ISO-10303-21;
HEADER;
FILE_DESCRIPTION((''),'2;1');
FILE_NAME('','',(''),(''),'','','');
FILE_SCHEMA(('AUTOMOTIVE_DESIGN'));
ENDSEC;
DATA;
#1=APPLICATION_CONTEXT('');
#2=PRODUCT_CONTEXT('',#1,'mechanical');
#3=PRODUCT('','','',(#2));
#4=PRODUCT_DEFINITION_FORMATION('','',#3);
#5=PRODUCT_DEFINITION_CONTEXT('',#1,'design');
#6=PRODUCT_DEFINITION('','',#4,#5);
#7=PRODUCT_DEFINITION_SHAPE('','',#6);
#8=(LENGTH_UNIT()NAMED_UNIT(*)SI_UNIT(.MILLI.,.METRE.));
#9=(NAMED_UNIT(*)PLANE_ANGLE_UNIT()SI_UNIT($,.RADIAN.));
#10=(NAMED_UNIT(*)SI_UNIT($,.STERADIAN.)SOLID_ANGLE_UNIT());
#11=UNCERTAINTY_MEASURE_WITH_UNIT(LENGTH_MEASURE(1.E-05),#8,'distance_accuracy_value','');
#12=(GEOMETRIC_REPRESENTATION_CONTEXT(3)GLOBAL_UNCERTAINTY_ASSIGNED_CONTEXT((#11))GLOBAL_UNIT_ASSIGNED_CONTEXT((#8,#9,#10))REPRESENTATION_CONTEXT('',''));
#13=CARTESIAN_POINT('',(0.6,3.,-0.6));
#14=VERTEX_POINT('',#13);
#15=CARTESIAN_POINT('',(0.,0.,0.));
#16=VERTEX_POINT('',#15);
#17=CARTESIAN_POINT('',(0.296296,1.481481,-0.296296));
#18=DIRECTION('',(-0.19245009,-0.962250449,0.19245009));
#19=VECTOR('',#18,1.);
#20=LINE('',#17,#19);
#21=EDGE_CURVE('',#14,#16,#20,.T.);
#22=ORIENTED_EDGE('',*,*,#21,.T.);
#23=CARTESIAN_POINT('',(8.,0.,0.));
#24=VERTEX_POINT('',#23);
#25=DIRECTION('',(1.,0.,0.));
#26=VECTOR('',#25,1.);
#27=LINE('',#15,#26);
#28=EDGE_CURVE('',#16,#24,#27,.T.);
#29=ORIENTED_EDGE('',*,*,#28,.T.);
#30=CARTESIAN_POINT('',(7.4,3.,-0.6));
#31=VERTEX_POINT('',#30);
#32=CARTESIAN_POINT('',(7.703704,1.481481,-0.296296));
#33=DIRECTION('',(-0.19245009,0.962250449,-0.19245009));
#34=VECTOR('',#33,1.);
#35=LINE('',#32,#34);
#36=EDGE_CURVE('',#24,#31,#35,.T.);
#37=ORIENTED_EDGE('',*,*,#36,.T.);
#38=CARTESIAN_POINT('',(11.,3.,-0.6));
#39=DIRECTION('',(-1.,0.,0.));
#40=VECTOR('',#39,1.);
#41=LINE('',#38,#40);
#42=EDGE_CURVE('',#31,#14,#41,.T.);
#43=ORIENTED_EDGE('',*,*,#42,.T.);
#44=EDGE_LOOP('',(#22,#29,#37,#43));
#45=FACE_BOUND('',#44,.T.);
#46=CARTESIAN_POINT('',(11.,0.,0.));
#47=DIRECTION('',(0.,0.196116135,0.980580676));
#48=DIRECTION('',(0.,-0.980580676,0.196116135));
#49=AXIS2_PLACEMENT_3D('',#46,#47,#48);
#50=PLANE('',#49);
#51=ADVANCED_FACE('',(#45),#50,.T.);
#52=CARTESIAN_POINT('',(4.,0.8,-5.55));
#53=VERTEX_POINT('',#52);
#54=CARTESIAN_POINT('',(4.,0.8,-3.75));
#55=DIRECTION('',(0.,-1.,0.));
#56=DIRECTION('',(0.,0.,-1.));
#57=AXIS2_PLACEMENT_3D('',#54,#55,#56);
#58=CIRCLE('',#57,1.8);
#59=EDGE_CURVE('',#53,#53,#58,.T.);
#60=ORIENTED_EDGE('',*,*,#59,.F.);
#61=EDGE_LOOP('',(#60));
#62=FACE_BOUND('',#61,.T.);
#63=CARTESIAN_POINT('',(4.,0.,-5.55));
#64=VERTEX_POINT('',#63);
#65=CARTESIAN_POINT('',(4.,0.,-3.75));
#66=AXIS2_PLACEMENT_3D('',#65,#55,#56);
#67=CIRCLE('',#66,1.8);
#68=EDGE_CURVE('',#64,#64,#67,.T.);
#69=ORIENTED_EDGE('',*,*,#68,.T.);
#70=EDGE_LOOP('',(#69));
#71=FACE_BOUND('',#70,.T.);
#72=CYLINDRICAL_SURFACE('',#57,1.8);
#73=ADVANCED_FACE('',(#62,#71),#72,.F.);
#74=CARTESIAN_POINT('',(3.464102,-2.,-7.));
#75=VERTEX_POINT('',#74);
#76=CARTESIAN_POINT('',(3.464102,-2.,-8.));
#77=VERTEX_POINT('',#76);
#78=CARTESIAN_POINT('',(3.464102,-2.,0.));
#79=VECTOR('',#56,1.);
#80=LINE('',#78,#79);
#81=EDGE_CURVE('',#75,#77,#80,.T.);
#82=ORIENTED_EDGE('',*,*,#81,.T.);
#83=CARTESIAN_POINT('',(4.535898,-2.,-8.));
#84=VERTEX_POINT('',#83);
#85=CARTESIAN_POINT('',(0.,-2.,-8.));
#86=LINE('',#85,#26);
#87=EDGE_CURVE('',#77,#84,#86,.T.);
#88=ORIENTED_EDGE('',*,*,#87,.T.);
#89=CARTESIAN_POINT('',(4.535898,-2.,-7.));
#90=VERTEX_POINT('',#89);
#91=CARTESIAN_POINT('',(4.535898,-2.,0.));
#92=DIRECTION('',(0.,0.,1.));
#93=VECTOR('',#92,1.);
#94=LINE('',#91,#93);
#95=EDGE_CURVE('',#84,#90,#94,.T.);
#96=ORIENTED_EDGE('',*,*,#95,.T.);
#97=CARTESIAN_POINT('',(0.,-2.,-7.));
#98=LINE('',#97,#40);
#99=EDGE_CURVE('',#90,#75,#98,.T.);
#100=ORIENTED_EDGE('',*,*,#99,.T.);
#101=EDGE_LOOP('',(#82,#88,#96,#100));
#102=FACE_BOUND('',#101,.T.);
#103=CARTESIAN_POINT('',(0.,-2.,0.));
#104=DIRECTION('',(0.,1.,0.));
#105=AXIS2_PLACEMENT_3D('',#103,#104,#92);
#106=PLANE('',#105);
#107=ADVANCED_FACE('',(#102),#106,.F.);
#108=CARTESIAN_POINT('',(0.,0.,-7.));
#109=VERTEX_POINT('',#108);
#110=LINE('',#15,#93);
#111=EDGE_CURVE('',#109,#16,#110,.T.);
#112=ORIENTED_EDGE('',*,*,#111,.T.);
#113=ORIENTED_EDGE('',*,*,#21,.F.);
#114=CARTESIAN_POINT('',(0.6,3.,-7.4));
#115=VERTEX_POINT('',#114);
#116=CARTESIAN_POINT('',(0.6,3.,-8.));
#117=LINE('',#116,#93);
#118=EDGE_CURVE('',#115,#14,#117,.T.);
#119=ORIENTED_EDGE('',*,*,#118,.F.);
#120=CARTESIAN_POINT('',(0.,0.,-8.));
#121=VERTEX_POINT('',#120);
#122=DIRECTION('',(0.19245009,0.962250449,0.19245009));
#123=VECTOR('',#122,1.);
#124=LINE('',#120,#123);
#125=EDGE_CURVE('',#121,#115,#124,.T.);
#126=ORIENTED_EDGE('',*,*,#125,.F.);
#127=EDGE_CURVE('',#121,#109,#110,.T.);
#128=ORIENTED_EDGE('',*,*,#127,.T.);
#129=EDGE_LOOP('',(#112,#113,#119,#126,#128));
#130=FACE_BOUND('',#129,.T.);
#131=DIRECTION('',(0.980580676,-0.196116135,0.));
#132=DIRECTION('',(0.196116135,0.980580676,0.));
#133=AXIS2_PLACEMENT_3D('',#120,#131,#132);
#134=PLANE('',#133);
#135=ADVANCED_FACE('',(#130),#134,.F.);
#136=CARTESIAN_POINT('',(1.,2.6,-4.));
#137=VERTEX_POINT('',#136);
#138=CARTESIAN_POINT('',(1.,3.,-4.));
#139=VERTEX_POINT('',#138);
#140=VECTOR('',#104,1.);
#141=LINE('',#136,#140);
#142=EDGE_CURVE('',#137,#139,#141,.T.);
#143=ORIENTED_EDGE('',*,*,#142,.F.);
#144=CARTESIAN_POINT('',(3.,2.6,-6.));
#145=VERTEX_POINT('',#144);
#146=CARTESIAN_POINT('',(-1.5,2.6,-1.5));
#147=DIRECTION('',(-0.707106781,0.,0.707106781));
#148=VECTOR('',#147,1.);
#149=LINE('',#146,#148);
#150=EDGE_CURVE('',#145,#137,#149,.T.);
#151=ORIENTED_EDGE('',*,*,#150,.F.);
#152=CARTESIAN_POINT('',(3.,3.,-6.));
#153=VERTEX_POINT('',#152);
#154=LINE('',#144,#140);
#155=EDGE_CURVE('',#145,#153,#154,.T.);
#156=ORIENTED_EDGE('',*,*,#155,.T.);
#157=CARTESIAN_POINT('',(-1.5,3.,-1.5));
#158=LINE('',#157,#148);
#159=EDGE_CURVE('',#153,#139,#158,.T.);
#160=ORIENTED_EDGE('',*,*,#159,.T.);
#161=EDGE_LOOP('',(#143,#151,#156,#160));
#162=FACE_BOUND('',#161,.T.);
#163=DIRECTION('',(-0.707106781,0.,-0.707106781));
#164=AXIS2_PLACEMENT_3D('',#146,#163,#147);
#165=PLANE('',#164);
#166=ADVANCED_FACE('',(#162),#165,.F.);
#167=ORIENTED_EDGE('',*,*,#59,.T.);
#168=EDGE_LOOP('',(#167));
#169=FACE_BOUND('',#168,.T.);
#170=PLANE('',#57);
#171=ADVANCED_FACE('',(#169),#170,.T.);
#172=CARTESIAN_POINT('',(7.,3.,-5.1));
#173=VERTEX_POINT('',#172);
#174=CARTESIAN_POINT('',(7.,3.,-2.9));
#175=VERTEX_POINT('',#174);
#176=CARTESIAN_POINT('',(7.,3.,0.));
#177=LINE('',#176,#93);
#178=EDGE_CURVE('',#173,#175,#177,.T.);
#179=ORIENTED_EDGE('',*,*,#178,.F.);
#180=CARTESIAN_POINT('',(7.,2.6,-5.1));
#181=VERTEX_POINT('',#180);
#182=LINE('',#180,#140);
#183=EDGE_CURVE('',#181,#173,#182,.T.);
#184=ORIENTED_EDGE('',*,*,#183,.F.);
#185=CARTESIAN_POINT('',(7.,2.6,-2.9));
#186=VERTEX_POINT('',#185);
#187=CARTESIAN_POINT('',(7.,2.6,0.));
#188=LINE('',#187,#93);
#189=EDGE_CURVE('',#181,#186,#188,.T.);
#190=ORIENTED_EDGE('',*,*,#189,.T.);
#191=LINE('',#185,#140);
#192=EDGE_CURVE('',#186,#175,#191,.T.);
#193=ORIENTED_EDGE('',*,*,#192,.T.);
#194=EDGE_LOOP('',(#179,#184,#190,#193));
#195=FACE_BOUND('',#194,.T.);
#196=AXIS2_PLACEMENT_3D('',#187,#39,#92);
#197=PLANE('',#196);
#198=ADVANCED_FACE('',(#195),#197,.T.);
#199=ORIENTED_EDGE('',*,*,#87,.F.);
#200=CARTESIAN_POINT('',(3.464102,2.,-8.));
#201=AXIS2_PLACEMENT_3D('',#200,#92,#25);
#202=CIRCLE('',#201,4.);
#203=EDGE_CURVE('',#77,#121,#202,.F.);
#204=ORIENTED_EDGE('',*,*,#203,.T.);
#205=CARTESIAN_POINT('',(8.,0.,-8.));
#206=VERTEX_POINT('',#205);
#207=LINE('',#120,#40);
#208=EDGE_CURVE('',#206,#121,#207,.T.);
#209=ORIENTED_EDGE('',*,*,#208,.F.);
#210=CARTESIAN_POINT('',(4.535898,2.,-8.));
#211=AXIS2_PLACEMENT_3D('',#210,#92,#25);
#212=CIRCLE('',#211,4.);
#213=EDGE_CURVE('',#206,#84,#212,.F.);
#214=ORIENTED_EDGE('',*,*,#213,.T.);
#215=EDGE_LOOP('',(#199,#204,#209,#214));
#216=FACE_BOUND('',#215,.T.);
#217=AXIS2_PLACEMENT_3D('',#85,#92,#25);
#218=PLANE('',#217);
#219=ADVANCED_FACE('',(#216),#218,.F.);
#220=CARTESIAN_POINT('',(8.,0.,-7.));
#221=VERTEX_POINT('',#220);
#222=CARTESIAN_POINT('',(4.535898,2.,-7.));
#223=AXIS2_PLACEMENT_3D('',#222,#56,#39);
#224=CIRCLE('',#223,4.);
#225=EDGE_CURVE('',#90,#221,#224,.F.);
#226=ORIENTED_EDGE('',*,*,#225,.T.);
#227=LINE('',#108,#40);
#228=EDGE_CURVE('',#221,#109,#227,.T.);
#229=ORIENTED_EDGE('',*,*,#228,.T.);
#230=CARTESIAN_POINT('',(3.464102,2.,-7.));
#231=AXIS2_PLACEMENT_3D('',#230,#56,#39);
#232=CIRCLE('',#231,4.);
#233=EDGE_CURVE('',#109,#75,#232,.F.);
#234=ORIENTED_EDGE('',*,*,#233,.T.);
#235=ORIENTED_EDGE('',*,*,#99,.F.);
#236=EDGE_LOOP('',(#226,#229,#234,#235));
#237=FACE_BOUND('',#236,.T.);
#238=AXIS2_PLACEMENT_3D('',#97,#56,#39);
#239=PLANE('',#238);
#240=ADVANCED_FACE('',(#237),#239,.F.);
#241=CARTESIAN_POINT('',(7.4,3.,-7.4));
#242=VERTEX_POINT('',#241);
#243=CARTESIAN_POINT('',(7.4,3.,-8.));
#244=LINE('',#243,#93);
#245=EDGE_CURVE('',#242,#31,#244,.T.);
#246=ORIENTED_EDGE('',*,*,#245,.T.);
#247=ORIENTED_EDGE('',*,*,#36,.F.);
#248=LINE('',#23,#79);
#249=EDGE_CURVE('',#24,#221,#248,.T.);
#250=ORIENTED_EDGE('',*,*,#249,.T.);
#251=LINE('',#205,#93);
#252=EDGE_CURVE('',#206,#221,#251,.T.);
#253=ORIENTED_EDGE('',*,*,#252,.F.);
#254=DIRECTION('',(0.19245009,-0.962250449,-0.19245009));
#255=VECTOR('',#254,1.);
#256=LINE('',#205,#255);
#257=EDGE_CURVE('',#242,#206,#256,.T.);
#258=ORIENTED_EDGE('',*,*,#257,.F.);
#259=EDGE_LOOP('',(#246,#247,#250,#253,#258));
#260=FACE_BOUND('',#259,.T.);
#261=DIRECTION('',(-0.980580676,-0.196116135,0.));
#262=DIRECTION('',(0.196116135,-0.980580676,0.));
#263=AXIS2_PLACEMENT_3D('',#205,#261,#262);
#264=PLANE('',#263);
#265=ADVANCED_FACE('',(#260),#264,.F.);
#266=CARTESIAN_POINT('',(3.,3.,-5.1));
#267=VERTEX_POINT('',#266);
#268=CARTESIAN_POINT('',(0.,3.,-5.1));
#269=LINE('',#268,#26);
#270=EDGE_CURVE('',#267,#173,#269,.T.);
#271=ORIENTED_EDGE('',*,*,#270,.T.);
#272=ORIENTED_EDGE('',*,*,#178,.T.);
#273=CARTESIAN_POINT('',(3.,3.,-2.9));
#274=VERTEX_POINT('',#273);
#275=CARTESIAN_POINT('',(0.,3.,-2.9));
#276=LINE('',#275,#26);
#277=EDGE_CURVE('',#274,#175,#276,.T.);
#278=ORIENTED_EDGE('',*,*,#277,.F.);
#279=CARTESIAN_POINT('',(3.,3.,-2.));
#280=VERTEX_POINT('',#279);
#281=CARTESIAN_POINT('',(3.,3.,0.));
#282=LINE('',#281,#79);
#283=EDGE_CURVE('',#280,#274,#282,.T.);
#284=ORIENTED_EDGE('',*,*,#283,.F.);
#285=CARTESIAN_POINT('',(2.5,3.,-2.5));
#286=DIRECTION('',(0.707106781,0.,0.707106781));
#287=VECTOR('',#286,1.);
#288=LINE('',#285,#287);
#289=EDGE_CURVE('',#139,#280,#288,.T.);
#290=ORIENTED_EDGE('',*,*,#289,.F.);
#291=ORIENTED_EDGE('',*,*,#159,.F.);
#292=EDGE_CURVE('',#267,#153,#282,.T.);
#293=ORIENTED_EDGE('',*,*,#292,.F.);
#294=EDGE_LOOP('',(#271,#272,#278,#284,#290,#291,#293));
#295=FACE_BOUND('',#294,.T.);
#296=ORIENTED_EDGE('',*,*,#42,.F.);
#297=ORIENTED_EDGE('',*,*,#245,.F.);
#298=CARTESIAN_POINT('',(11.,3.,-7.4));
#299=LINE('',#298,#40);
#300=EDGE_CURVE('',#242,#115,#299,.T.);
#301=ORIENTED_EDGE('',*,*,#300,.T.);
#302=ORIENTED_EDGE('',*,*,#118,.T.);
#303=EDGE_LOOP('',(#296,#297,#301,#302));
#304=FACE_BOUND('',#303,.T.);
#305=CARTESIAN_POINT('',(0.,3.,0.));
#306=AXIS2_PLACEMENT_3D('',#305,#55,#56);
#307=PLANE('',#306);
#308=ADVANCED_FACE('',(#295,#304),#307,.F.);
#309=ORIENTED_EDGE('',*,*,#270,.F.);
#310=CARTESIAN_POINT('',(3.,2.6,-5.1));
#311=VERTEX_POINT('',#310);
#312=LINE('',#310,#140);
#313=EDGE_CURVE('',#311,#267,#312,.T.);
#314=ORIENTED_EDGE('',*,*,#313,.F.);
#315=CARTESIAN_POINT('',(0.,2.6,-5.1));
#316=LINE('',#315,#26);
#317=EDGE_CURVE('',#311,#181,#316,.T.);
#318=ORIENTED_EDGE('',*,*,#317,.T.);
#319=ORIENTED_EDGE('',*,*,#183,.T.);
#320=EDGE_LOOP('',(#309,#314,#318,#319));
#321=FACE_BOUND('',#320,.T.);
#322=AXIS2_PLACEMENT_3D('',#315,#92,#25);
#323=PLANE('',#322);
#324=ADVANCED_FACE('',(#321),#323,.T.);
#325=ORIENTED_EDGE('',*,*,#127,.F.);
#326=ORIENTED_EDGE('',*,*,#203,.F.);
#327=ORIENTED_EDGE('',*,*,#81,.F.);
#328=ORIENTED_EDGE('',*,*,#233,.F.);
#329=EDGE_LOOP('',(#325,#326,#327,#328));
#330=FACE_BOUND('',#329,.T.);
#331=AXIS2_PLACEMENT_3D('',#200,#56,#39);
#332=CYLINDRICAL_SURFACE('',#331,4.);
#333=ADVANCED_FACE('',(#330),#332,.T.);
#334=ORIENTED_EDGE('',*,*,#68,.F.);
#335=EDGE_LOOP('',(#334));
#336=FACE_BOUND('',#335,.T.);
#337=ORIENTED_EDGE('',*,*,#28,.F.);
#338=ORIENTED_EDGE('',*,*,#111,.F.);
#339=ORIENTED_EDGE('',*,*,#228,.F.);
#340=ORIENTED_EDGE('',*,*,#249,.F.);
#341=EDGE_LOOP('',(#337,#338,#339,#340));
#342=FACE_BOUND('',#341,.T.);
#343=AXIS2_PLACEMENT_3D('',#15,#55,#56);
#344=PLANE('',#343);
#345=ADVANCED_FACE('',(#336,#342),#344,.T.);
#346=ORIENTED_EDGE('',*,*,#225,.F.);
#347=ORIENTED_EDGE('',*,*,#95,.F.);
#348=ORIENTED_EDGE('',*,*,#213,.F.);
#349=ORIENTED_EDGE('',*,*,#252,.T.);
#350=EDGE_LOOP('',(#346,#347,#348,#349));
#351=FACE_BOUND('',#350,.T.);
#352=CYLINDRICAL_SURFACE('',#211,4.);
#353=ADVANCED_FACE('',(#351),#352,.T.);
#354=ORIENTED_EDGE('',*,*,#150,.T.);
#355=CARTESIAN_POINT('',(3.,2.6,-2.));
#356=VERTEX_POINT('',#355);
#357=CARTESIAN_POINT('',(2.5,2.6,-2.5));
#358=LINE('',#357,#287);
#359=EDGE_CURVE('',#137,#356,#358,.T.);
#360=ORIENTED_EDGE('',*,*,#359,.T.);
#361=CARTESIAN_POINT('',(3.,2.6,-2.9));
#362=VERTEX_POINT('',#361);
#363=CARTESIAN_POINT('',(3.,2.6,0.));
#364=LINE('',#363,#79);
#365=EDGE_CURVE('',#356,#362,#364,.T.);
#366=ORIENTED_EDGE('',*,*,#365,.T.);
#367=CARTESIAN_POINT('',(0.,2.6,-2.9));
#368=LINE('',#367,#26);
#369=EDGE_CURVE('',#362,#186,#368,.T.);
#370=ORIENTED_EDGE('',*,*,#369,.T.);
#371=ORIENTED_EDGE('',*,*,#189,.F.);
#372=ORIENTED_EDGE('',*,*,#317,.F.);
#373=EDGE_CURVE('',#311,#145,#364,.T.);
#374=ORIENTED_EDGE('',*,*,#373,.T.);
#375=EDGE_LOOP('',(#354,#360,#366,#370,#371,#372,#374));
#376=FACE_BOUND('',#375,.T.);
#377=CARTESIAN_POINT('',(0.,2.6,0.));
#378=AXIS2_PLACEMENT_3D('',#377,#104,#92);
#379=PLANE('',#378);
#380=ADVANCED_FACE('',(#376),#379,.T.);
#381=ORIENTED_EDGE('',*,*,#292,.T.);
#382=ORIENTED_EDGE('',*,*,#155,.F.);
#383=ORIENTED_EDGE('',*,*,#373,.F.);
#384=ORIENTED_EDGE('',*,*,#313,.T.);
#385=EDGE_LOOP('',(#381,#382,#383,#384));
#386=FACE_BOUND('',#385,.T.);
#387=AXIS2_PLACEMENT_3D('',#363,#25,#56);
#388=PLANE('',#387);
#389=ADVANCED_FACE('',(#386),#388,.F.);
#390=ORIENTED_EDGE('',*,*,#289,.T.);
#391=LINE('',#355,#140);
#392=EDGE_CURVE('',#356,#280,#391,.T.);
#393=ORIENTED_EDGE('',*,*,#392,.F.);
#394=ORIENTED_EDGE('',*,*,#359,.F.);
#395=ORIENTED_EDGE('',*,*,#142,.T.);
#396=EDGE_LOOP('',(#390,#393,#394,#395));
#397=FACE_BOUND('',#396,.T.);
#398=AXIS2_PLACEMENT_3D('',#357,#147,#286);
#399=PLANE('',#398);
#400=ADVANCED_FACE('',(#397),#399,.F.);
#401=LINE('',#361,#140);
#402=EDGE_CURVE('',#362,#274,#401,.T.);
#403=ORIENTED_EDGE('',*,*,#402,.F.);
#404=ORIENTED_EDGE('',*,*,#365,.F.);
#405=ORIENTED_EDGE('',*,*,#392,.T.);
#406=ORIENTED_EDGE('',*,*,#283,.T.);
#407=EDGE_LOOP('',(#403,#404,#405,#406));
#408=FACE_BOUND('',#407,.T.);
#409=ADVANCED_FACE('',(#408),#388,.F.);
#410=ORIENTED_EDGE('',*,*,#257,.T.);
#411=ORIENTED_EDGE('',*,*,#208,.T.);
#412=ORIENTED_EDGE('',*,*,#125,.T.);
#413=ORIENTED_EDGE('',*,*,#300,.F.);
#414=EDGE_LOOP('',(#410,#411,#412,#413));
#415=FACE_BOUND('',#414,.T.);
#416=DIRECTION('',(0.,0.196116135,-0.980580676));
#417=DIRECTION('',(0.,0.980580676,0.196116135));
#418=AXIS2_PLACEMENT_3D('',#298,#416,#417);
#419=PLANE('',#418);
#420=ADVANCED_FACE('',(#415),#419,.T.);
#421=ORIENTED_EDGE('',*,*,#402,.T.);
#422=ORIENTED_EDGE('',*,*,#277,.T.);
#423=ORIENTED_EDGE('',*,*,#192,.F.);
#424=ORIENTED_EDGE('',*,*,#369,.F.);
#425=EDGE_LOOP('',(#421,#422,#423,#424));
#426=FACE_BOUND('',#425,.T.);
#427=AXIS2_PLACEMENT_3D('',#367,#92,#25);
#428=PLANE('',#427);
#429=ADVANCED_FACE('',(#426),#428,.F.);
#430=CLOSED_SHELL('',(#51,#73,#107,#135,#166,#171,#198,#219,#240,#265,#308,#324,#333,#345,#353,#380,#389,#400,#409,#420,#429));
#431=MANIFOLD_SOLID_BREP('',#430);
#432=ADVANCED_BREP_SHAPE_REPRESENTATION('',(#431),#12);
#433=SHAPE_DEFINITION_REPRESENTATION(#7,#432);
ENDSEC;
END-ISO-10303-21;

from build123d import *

# Parameters (mm, degrees)
SKETCH1_W               = 8
SKETCH1_H               = 8
BOSS_EXTRUDE1_DEPTH     = 3
CUT_EXTRUDE1_DEPTH      = 12.704699911
CUT_EXTRUDE1_DEPTH_BACK = 12.704699911
CUT_EXTRUDE2_DEPTH      = 11
SKETCH4_R               = 1.8
CUT_EXTRUDE3_DEPTH      = 0.8
SKETCH5_W               = 8
SKETCH5_H               = 1
BOSS_EXTRUDE2_DEPTH     = 2
FILLET1_R               = 4
SKETCH6_W               = 4
SKETCH6_H               = 2.2
CUT_EXTRUDE4_DEPTH      = 0.4


with BuildPart() as part:
    # Sketch1 → Boss-Extrude1 (new body)
    with BuildSketch(Plane(origin=(0, 0, 0), x_dir=(1, 0, 0), z_dir=(0, 1, 0))):
        with Locations((4, 4)):
            Rectangle(SKETCH1_W, SKETCH1_H)
    extrude(amount=BOSS_EXTRUDE1_DEPTH)

    # Sketch2 → Cut-Extrude1 (cut, two sides: drawn at the far end of the back side and taken through both)
    with BuildSketch(Plane.XY.offset(-CUT_EXTRUDE1_DEPTH_BACK)):
        Polygon((0, 0), (0.6, 3), (0, 3), align=None)
        Polygon((8, 0), (7.4, 3), (8, 3), align=None)
    extrude(amount=CUT_EXTRUDE1_DEPTH + CUT_EXTRUDE1_DEPTH_BACK, mode=Mode.SUBTRACT)

    # Sketch3 → Cut-Extrude2 (cut)
    with BuildSketch(Plane(origin=(0, 0, 0), x_dir=(0, 0, -1), z_dir=(1, 0, 0))):
        Polygon((0, 0), (0.6, 3), (0, 3), align=None)
        Polygon((8, 3), (7.4, 3), (8, 0), align=None)
    extrude(amount=CUT_EXTRUDE2_DEPTH, mode=Mode.SUBTRACT)

    # Sketch4 → Cut-Extrude3 (cut)
    with BuildSketch(Plane.XZ):
        with Locations(Location((4, -3.75, 0), (0, 0, 270))):
            Circle(SKETCH4_R)
    extrude(amount=-CUT_EXTRUDE3_DEPTH, mode=Mode.SUBTRACT)

    # Sketch5 → Boss-Extrude2 (add)
    with BuildSketch(Plane.XZ):
        with Locations((4, -7.5)):
            Rectangle(SKETCH5_W, SKETCH5_H)
    extrude(amount=BOSS_EXTRUDE2_DEPTH)

    # Fillet1
    # the kernel refuses this fillet: 4 mm, written as the material it takes off along each edge
    with BuildSketch(Plane(origin=(8, -2, -16.660254038), x_dir=(0, 1, 0), z_dir=(0, 0, 1)), Plane(origin=(0, -2, 1.660254038), x_dir=(0, 1, 0), z_dir=(0, 0, -1))) as fillet1_piece_1:
        with BuildLine():
            CenterArc((4, 3.464101615), FILLET1_R, 180, 60)
            Line((0, 3.464101615), (-0.08, 3.464101615))
            Line((-0.08, 3.464101615), (-0.08, 0))
            Line((-0.08, 0), (0, -0.08))
            ThreePointArc((0, -0.08), (1, -0.08), (1.96, -0.069282032))
            Line((1.96, -0.069282032), (2, 0))
        make_face()
    extrude(amount=18.320508076, mode=Mode.SUBTRACT)

    # Sketch6 → Cut-Extrude4 (cut)
    with BuildSketch(Plane(origin=(0, 3, 0), x_dir=(1, 0, 0), z_dir=(0, 1, 0))):
        Polygon((1, 4), (3, 2), (3, 2.9), (3, 5.1), (3, 6), align=None)
        with Locations((5, 4)):
            Rectangle(SKETCH6_W, SKETCH6_H)
    extrude(amount=-CUT_EXTRUDE4_DEPTH, mode=Mode.SUBTRACT)


solid = part.part
